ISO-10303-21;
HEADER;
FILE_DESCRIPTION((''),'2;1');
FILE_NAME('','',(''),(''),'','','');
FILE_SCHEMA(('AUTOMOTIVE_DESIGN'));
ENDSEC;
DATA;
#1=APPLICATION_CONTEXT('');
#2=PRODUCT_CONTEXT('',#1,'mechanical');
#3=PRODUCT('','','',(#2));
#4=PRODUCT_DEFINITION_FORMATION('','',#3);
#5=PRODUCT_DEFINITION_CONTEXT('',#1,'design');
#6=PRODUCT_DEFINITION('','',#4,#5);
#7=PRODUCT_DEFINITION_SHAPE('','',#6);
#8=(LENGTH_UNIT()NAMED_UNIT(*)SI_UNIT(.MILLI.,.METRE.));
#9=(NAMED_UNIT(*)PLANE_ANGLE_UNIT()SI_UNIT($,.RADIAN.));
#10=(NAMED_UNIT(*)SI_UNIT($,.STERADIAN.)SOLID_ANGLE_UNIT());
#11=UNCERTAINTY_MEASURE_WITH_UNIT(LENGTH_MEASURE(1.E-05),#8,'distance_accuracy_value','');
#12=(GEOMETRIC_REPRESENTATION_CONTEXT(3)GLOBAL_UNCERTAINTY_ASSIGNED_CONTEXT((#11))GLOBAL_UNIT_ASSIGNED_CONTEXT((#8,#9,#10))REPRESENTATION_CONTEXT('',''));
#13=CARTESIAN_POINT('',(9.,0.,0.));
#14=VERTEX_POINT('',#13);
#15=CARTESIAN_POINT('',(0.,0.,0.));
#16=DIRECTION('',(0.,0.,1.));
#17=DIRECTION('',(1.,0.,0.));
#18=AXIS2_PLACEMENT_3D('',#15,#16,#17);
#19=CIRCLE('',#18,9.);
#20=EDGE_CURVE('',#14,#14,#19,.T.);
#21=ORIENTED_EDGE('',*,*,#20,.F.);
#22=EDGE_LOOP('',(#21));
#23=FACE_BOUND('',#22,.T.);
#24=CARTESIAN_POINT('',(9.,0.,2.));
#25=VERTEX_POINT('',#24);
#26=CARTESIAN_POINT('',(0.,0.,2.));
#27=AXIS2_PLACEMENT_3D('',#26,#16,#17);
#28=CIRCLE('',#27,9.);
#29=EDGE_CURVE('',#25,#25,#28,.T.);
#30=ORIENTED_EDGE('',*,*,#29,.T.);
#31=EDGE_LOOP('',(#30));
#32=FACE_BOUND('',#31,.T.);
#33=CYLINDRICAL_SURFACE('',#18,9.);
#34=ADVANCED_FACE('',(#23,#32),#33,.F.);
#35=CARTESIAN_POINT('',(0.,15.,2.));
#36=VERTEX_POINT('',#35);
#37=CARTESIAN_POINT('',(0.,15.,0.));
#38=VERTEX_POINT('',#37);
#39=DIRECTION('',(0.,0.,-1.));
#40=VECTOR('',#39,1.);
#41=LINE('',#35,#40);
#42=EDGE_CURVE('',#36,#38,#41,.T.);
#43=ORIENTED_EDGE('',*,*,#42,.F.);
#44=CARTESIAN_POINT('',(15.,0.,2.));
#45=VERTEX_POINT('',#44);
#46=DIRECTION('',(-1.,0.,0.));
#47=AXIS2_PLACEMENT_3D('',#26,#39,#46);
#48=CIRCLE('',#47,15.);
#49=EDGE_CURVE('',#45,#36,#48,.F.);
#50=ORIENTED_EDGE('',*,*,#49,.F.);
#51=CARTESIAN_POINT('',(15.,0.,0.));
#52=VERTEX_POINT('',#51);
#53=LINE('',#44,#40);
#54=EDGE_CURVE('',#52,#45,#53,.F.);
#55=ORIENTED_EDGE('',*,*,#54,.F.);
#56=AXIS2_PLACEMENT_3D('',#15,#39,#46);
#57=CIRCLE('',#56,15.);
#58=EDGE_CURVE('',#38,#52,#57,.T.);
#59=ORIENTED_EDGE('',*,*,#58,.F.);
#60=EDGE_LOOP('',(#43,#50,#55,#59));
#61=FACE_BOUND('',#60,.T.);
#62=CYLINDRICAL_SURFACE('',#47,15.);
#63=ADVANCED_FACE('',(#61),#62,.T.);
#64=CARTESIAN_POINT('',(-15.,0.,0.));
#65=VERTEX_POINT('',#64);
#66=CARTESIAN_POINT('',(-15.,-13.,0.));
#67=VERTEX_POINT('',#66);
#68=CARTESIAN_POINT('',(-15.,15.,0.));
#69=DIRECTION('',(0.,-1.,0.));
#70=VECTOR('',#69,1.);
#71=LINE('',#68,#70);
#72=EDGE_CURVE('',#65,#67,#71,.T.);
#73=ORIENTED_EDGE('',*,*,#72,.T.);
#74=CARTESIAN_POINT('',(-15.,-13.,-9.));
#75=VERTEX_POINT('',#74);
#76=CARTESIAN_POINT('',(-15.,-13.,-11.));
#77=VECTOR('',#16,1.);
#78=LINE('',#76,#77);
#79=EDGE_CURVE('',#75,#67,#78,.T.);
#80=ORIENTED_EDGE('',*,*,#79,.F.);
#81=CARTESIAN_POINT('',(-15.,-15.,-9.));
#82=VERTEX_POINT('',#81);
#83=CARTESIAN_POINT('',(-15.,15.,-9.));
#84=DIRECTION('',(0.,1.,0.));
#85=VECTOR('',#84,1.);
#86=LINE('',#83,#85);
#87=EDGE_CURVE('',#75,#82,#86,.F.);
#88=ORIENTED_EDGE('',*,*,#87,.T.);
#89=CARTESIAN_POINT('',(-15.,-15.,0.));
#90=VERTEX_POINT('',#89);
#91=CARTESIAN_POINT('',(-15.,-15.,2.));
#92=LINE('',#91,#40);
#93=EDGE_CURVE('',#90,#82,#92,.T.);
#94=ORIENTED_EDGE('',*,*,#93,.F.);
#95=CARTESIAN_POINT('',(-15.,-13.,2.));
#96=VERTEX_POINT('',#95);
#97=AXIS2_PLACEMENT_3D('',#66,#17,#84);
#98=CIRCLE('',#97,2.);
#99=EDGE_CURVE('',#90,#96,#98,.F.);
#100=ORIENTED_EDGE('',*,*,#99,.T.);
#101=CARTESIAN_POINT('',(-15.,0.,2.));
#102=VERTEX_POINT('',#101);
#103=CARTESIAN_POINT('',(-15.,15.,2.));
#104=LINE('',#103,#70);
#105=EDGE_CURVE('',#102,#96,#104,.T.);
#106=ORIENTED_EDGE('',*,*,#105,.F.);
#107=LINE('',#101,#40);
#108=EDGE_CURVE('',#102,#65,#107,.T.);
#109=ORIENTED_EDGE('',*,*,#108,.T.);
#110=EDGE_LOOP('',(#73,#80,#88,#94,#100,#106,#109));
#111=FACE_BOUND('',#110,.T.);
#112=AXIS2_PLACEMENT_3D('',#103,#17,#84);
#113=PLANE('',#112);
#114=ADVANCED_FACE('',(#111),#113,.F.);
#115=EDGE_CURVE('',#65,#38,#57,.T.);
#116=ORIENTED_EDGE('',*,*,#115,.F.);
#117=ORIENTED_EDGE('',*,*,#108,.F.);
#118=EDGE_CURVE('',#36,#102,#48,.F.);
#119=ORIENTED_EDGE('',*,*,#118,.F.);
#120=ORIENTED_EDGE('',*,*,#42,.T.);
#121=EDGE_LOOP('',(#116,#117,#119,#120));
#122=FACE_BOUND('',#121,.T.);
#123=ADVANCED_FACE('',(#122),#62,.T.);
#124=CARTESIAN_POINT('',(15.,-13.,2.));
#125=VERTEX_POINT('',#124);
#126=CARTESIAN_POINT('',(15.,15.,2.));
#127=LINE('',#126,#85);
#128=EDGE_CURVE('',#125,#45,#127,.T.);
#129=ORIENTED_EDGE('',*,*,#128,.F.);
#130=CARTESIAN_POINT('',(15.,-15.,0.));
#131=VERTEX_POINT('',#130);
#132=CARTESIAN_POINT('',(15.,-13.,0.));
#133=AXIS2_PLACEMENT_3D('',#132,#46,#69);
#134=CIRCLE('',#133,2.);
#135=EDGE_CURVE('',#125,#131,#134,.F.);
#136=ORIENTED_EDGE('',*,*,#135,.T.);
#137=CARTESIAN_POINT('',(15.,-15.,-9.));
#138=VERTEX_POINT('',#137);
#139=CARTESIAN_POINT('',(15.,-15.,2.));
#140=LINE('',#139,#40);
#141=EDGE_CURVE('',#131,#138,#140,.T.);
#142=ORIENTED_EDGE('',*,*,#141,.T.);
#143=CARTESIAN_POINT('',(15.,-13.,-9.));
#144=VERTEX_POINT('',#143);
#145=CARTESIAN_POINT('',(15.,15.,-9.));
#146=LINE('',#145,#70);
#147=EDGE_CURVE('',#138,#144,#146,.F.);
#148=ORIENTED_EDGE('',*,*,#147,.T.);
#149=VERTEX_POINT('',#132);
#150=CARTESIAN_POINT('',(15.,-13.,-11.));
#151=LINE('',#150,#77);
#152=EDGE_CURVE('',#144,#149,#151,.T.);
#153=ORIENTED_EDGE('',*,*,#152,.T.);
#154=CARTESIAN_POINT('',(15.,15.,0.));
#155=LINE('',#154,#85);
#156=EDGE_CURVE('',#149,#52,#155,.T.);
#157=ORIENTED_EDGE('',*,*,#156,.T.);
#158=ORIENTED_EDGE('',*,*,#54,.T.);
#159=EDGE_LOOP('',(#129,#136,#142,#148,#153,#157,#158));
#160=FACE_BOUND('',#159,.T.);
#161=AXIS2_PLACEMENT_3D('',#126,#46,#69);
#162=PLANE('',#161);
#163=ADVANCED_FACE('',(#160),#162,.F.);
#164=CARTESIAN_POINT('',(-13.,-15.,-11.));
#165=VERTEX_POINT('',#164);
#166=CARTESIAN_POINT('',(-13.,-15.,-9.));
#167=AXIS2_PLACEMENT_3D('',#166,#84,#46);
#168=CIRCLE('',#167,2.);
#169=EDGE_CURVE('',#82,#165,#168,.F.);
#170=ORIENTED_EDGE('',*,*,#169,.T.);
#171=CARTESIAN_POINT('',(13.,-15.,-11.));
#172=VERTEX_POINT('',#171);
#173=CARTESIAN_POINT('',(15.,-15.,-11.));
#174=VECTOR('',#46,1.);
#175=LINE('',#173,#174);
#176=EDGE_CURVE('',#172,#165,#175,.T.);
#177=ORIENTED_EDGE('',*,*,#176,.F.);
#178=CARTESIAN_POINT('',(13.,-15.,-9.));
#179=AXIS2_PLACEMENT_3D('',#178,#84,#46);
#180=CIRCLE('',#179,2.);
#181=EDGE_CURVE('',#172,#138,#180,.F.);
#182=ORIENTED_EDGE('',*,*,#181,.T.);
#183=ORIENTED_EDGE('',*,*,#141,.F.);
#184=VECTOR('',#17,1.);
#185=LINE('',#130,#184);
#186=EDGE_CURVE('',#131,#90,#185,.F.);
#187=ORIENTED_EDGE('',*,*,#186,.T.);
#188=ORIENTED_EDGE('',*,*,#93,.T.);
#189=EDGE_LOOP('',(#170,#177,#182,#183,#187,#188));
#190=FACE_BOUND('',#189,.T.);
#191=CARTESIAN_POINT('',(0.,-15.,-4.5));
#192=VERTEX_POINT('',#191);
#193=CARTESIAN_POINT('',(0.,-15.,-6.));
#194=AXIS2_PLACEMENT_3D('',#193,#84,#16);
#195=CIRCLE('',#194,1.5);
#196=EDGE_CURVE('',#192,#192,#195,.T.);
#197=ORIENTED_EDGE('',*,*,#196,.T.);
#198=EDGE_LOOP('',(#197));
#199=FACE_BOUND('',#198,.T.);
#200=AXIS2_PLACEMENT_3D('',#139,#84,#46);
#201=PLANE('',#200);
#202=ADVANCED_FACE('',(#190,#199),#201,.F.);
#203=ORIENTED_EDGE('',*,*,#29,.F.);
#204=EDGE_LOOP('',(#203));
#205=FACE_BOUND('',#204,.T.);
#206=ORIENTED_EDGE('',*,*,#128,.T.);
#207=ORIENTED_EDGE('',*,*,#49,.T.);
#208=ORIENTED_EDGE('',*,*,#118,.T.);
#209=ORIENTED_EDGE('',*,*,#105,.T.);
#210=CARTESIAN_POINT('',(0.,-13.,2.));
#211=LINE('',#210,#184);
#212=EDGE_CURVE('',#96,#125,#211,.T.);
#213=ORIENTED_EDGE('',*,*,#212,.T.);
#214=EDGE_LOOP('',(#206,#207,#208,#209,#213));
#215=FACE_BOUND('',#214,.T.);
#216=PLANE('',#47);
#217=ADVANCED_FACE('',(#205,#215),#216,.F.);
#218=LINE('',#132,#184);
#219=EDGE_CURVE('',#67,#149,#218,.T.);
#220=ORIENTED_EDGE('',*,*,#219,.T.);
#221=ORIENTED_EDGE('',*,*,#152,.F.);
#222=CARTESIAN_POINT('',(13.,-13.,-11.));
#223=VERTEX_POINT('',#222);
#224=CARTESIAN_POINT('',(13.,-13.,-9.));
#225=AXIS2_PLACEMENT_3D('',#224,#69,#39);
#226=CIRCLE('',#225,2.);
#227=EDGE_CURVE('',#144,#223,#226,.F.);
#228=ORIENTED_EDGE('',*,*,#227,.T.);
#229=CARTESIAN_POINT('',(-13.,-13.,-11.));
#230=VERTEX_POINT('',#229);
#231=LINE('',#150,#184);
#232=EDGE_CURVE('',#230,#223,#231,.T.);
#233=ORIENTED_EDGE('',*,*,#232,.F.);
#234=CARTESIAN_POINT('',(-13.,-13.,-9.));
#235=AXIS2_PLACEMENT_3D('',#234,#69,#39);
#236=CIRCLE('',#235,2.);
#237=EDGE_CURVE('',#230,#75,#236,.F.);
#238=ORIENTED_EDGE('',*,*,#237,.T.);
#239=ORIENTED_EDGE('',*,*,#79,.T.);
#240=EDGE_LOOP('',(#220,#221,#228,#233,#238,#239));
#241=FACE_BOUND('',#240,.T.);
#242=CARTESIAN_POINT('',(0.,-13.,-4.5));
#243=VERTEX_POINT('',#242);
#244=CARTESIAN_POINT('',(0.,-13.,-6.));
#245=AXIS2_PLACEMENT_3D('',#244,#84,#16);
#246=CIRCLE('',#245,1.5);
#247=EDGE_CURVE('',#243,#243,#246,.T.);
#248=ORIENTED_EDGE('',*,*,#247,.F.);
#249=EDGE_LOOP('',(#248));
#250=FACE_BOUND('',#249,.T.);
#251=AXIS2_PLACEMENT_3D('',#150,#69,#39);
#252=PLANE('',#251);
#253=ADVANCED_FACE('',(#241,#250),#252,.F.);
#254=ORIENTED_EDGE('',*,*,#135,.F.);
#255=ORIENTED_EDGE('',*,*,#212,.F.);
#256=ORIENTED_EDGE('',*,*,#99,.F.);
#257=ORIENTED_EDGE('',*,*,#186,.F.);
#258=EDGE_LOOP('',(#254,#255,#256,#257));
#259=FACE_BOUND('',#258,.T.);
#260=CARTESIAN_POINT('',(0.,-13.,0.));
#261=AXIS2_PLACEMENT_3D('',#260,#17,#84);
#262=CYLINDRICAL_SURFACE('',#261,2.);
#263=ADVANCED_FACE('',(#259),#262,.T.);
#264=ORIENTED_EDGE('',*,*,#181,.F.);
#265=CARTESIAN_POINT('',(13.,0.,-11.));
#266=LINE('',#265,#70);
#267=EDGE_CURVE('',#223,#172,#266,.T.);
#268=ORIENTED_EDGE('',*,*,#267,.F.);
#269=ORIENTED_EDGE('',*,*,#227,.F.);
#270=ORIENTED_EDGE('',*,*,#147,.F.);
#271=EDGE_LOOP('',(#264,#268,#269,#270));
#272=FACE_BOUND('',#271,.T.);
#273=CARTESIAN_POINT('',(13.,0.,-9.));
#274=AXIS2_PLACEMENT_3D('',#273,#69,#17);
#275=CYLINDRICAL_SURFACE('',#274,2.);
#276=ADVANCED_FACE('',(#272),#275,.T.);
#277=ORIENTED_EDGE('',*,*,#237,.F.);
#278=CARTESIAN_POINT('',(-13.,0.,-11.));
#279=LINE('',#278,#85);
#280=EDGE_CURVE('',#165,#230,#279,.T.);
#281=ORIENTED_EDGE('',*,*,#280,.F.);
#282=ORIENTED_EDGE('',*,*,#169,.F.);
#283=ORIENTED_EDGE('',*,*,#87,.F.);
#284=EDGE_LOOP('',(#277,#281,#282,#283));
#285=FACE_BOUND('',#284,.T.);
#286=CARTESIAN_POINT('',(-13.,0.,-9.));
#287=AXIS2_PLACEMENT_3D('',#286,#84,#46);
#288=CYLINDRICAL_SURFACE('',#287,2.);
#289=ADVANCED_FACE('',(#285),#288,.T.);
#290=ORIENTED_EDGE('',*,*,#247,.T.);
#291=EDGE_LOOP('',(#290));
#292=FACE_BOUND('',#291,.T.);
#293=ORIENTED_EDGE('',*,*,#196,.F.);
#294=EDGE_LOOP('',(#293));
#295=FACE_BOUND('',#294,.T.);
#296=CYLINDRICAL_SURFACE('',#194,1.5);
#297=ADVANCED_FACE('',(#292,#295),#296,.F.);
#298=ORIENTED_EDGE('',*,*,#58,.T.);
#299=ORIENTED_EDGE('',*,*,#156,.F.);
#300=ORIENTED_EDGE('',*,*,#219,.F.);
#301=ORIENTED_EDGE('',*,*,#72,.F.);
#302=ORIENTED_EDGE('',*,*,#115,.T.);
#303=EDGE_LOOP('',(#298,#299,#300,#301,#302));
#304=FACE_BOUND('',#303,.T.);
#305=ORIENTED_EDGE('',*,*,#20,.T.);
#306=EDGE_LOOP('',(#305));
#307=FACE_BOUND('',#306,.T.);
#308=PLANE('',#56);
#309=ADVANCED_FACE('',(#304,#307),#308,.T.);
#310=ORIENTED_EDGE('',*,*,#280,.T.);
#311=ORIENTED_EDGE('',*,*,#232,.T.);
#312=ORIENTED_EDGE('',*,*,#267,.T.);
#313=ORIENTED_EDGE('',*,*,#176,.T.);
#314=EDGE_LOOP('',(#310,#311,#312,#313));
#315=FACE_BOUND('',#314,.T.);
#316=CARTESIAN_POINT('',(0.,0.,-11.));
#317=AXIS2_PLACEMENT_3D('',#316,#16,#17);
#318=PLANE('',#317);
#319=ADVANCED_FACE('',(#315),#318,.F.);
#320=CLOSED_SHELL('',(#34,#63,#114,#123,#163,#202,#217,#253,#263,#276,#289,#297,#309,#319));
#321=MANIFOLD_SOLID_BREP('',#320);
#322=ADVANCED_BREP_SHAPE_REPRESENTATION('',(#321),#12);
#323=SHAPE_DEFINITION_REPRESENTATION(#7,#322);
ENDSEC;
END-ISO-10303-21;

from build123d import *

# Parameters (mm, degrees)
SKETCH1_W           = 30
SKETCH1_H           = 30
BOSS_EXTRUDE1_DEPTH = 2
SKETCH2_R           = 9
CUT_EXTRUDE1_DEPTH  = 22.307275753
FILLET1_R           = 15
SKETCH3_W           = 30
SKETCH3_H           = 2
BOSS_EXTRUDE2_DEPTH = 11
SKETCH4_R           = 1.5
CUT_EXTRUDE2_DEPTH  = 34.615472628
FILLET2_R           = 2


with BuildPart() as part:
    # Sketch1 → Boss-Extrude1 (new body)
    with BuildSketch(Plane.XY):
        Rectangle(SKETCH1_W, SKETCH1_H)
    extrude(amount=BOSS_EXTRUDE1_DEPTH)

    # Sketch2 → Cut-Extrude1 (cut, through all)
    with BuildSketch(Plane.XY.offset(2)):
        Circle(SKETCH2_R)
    extrude(amount=-CUT_EXTRUDE1_DEPTH, mode=Mode.SUBTRACT)

    # Fillet1
    fillet1_edges = [part.edges().sort_by_distance(p)[0] for p in [
        (-15, 15, 1),
        (15, 15, 1),
    ]]
    fillet(fillet1_edges, radius=FILLET1_R - 0.0001)  # a hair under: the kernel refuses the full size

    # Sketch3 → Boss-Extrude2 (add)
    with BuildSketch(Plane(origin=(0, 0, 0), x_dir=(-1, 0, 0), z_dir=(0, 0, -1))):
        with Locations((0, -14)):
            Rectangle(SKETCH3_W, SKETCH3_H)
    extrude(amount=BOSS_EXTRUDE2_DEPTH)

    # Sketch4 → Cut-Extrude2 (cut, through all)
    with BuildSketch(Plane(origin=(0, -13, 0), x_dir=(1, 0, 0), z_dir=(0, 1, 0))):
        with Locations(Location((0, 6, 0), (0, 0, 270))):
            Circle(SKETCH4_R)
    extrude(amount=-CUT_EXTRUDE2_DEPTH, mode=Mode.SUBTRACT)

    # Fillet2
    fillet2_edges = [part.edges().sort_by_distance(p)[0] for p in [
        (15, -14, -11),
        (-15, -14, -11),
        (0, -15, 2),
    ]]
    fillet(fillet2_edges, radius=FILLET2_R)


solid = part.part
